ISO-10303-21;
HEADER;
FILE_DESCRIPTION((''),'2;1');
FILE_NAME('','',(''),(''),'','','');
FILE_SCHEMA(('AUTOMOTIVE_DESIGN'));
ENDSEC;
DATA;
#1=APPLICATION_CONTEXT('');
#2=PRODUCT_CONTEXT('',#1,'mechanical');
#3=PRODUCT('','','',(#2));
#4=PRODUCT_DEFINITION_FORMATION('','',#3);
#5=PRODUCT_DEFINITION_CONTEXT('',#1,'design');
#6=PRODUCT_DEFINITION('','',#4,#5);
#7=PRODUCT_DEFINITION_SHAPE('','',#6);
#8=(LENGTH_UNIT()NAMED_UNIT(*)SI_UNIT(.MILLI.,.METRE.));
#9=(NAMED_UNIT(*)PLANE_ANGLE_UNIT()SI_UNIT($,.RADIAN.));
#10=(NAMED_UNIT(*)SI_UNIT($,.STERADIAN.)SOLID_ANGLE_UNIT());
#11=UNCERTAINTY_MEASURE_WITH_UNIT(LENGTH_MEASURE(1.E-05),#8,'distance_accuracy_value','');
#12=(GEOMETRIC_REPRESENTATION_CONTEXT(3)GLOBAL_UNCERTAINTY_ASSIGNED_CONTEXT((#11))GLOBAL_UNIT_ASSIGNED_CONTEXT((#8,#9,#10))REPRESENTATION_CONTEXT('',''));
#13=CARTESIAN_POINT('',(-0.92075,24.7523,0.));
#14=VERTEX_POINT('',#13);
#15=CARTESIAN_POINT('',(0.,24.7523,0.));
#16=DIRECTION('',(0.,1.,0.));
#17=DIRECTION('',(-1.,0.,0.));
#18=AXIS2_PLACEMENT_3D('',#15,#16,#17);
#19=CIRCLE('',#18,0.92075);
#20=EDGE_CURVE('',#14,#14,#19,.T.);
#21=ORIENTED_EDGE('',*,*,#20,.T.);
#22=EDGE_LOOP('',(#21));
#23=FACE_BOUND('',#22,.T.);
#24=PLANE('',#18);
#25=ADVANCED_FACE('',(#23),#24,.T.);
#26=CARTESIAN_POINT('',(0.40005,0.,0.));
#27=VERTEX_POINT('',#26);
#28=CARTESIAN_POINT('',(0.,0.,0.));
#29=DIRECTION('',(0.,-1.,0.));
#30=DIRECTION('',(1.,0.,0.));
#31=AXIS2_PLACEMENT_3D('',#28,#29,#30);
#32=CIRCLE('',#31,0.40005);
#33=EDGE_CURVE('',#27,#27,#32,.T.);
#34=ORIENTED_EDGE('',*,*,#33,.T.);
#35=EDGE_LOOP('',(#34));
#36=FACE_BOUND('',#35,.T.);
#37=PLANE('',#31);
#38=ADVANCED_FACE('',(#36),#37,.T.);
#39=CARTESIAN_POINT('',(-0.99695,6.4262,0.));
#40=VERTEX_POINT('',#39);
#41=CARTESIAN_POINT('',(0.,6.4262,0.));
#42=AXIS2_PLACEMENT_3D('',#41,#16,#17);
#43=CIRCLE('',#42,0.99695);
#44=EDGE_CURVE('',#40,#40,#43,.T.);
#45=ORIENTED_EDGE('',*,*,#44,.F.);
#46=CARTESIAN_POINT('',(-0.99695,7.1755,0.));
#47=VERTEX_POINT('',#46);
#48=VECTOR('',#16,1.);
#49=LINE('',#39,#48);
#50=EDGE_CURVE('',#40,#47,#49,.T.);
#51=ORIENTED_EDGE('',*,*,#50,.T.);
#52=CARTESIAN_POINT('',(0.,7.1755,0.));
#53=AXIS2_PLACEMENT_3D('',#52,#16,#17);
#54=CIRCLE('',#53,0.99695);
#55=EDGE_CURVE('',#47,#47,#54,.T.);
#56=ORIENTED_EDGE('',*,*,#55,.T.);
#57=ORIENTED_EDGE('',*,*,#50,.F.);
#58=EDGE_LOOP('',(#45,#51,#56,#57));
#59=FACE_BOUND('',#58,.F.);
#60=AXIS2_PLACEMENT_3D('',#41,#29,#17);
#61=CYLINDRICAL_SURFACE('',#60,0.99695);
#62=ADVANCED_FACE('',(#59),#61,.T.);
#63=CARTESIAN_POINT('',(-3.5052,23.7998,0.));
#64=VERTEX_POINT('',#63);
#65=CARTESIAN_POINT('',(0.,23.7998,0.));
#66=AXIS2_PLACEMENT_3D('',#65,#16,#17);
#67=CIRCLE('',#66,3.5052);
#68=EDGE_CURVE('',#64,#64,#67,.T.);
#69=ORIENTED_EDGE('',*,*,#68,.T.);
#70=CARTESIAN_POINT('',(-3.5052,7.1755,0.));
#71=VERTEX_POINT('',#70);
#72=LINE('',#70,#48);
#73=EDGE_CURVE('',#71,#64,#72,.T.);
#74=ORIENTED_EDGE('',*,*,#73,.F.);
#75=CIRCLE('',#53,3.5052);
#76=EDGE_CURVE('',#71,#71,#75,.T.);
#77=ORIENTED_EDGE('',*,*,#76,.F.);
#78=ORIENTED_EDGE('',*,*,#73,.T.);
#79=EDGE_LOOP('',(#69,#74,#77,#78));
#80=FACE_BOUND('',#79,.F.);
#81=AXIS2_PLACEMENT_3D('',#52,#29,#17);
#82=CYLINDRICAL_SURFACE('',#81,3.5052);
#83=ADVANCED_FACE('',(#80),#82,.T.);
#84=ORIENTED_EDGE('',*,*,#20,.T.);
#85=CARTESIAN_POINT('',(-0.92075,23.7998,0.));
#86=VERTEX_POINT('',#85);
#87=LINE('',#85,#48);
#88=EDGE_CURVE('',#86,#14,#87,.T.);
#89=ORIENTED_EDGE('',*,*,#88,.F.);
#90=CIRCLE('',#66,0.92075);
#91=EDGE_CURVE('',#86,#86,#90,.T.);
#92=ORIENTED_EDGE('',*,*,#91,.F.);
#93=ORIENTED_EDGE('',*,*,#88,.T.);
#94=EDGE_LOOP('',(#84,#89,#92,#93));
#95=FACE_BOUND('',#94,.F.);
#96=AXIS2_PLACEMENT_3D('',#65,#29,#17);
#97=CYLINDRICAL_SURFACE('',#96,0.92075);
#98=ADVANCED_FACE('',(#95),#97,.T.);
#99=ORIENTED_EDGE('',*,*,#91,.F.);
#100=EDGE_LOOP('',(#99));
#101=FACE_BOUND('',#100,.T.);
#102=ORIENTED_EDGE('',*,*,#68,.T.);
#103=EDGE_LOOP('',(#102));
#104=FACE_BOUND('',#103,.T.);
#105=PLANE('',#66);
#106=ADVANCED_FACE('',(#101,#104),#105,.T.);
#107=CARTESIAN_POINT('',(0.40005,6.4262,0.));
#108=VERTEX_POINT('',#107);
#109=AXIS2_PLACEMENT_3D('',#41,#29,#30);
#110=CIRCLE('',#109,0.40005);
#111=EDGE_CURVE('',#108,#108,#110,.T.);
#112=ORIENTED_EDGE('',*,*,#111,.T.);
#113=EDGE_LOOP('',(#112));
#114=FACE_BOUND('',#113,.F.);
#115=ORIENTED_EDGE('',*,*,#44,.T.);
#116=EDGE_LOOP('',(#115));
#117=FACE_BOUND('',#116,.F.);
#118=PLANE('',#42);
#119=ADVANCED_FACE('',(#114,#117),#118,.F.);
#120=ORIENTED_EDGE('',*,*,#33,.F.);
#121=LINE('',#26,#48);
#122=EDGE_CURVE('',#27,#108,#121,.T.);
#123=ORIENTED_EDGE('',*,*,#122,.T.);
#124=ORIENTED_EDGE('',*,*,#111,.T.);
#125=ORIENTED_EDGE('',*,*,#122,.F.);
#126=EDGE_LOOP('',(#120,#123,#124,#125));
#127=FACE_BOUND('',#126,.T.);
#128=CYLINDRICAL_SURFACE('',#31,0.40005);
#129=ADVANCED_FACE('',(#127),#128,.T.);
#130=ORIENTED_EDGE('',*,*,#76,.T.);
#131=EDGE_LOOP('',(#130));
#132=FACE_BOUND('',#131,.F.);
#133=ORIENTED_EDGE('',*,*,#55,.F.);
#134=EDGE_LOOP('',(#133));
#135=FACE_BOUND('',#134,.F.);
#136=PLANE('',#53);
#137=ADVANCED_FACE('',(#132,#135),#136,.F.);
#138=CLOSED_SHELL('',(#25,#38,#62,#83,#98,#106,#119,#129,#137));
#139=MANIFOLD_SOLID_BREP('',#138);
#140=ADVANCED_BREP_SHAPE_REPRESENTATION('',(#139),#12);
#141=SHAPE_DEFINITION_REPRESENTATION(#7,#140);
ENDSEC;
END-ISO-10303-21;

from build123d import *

# Parameters (mm, degrees)
F0_R     = 0.40005
F1_DEPTH = 6.4262
F2_R     = 0.99695
F2_R_2   = 0.40005
F3_DEPTH = 0.7493
F4_R     = 3.5052
F4_R_2   = 0.99695
F5_DEPTH = 16.6243
F6_R     = 0.92075
F7_DEPTH = 0.9525


with BuildPart() as f1:
    # F0 (on Front) → F1 (new body)
    with BuildSketch(Plane.XZ):
        Circle(F0_R)
    extrude(amount=-F1_DEPTH)

    # F2 (on face) → F3 (join)
    with BuildSketch(Plane(origin=(0, 6.4262, 0), x_dir=(-1, 0, 0), z_dir=(0, 1, 0))):
        Circle(F2_R)
        Circle(F2_R_2, mode=Mode.SUBTRACT)
        Circle(F2_R_2)
    extrude(amount=F3_DEPTH)

    # F4 (on face) → F5 (join)
    with BuildSketch(Plane(origin=(0, 7.1755, 0), x_dir=(-1, 0, 0), z_dir=(0, 1, 0))):
        Circle(F4_R)
        Circle(F4_R_2, mode=Mode.SUBTRACT)
        Circle(F4_R_2)
    extrude(amount=F5_DEPTH)

    # F6 (on face) → F7 (join)
    with BuildSketch(Plane(origin=(0, 23.7998, 0), x_dir=(-1, 0, 0), z_dir=(0, 1, 0))):
        Circle(F6_R)
    extrude(amount=F7_DEPTH)


solid = f1.part
